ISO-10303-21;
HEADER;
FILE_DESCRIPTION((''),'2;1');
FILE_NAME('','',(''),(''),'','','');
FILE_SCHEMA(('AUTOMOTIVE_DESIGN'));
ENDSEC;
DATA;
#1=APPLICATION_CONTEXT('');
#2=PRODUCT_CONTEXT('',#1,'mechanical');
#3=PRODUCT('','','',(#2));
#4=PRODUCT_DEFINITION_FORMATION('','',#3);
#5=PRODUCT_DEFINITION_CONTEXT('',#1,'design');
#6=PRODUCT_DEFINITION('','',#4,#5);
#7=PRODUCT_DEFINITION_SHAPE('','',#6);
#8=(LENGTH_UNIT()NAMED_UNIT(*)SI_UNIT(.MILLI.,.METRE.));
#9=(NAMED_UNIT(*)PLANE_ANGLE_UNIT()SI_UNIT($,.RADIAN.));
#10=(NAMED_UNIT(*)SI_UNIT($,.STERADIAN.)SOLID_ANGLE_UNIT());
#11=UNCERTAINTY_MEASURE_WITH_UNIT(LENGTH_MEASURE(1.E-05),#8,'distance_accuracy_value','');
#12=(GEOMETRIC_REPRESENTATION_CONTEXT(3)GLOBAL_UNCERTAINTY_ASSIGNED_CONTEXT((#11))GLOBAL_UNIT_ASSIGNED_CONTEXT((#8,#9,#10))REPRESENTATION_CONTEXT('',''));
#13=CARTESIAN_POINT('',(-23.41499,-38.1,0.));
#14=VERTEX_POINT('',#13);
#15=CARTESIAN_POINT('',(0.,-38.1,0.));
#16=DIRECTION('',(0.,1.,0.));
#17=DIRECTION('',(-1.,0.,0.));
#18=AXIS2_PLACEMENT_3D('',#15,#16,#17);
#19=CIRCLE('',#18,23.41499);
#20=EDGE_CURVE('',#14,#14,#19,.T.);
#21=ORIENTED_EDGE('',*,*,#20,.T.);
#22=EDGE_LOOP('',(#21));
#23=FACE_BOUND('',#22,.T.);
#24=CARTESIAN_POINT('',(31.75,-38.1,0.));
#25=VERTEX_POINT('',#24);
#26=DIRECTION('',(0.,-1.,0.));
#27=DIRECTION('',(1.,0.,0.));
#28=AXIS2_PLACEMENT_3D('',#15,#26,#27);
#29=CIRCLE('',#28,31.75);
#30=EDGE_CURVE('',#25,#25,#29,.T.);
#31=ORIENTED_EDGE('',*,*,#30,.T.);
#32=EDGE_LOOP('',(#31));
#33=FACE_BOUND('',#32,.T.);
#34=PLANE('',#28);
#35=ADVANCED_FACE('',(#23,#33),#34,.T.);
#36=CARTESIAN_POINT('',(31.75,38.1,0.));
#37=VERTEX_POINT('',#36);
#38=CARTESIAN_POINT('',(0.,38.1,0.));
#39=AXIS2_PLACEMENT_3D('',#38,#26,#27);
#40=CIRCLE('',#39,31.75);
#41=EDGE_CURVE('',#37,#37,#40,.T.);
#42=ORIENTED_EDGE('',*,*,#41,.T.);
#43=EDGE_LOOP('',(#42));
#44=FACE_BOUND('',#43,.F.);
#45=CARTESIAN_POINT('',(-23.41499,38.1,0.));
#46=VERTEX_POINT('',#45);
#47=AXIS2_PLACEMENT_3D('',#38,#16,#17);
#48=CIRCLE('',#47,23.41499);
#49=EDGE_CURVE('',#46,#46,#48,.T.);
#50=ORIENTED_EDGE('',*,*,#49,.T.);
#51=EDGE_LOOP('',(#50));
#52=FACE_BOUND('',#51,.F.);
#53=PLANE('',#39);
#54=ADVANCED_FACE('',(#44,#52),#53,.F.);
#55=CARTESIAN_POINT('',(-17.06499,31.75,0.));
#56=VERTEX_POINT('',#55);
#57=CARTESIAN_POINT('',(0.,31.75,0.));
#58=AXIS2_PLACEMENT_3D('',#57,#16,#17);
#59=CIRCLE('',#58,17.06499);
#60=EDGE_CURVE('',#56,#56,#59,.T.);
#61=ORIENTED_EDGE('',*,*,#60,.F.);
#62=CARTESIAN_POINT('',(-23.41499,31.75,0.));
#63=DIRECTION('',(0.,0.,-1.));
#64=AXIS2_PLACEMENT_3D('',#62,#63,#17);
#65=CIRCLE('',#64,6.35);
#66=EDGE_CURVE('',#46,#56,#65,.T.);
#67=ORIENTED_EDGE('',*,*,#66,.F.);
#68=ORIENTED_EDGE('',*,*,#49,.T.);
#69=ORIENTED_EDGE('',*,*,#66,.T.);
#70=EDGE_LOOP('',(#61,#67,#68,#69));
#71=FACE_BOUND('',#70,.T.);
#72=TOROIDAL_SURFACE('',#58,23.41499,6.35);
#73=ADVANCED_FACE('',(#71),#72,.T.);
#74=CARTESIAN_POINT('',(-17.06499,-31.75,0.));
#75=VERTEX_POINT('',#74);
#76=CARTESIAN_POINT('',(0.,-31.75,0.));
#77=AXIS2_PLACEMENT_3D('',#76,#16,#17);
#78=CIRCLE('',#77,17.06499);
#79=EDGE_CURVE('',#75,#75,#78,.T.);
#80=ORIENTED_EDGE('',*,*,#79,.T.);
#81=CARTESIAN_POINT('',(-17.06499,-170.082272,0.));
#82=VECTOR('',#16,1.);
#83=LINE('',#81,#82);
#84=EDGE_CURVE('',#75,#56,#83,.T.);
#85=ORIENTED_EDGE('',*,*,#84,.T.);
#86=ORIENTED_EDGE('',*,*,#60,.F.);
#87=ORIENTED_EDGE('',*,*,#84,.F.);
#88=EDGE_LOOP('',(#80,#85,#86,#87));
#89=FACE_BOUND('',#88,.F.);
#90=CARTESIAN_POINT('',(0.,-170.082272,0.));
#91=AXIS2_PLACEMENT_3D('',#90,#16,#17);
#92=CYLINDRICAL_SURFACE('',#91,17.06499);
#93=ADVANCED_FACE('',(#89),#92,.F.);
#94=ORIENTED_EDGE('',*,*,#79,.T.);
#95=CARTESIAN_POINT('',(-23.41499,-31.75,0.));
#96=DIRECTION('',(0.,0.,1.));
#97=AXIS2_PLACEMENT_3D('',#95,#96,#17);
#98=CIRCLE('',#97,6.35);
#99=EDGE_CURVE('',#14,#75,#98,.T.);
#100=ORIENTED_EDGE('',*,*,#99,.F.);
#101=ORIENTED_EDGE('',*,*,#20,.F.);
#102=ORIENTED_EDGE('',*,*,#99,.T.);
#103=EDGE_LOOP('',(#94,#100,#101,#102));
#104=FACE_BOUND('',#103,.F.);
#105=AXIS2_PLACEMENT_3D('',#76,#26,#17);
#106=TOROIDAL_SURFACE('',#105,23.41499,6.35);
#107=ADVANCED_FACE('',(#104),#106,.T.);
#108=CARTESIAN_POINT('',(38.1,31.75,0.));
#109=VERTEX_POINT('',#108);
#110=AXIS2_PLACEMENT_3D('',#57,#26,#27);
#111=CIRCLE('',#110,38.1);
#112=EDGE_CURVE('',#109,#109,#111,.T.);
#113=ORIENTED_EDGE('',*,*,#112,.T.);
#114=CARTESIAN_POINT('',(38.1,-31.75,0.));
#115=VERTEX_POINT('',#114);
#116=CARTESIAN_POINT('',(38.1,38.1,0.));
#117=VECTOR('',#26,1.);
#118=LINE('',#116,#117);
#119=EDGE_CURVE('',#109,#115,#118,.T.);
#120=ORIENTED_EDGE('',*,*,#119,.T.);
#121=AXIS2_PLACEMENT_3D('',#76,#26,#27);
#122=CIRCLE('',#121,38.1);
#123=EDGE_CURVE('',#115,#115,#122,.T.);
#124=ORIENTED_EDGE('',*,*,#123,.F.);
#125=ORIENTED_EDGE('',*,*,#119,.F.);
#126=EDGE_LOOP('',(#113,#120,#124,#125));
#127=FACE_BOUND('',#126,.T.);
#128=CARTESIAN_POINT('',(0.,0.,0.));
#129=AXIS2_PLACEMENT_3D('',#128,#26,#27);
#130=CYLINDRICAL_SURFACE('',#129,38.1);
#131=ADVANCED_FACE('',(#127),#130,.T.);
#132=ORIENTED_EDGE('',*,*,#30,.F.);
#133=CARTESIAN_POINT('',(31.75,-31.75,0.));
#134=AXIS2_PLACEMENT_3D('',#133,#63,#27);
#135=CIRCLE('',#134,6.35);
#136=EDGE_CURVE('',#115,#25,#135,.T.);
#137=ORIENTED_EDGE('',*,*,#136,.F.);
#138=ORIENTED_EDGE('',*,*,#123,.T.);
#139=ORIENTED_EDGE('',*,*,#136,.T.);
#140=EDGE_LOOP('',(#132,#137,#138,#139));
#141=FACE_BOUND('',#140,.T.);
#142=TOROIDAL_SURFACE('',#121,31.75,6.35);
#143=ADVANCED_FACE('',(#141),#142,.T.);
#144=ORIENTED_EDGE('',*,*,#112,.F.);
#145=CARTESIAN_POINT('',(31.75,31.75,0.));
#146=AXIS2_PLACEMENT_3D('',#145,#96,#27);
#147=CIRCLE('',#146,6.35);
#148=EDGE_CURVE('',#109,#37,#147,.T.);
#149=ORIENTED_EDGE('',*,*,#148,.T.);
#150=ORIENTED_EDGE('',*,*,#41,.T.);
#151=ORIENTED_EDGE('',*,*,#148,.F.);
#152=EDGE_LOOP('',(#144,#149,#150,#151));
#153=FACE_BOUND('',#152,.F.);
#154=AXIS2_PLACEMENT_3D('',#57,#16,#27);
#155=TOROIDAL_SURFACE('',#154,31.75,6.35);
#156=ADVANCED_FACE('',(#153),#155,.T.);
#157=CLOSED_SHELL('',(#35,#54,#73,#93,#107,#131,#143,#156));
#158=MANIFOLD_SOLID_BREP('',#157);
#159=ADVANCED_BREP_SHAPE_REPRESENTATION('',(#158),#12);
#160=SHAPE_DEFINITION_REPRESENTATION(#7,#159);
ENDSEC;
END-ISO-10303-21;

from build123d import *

# Parameters (mm, degrees)
F0_R     = 38.1
F1_DEPTH = 38.1
F3_D     = 34.12998
F4_R     = 6.35


with BuildPart() as f1:
    # F0 (on Front) → F1 (new body, symmetric)
    with BuildSketch(Plane.XZ):
        Circle(F0_R)
    extrude(amount=F1_DEPTH, both=True)

    # F3 (through all)
    with Locations(Plane.XZ.offset(38.1)):
        with Locations((0, 0)):
            Hole(F3_D / 2)

    # F4
    f4_edges = [f1.edges().sort_by_distance(p)[0] for p in [
        (-38.1, -38.1, 0),
        (-38.1, 38.1, 0),
        (-17.06499, 38.1, 0),
        (-17.06499, -38.1, 0),
    ]]
    fillet(f4_edges, radius=F4_R)


solid = f1.part
